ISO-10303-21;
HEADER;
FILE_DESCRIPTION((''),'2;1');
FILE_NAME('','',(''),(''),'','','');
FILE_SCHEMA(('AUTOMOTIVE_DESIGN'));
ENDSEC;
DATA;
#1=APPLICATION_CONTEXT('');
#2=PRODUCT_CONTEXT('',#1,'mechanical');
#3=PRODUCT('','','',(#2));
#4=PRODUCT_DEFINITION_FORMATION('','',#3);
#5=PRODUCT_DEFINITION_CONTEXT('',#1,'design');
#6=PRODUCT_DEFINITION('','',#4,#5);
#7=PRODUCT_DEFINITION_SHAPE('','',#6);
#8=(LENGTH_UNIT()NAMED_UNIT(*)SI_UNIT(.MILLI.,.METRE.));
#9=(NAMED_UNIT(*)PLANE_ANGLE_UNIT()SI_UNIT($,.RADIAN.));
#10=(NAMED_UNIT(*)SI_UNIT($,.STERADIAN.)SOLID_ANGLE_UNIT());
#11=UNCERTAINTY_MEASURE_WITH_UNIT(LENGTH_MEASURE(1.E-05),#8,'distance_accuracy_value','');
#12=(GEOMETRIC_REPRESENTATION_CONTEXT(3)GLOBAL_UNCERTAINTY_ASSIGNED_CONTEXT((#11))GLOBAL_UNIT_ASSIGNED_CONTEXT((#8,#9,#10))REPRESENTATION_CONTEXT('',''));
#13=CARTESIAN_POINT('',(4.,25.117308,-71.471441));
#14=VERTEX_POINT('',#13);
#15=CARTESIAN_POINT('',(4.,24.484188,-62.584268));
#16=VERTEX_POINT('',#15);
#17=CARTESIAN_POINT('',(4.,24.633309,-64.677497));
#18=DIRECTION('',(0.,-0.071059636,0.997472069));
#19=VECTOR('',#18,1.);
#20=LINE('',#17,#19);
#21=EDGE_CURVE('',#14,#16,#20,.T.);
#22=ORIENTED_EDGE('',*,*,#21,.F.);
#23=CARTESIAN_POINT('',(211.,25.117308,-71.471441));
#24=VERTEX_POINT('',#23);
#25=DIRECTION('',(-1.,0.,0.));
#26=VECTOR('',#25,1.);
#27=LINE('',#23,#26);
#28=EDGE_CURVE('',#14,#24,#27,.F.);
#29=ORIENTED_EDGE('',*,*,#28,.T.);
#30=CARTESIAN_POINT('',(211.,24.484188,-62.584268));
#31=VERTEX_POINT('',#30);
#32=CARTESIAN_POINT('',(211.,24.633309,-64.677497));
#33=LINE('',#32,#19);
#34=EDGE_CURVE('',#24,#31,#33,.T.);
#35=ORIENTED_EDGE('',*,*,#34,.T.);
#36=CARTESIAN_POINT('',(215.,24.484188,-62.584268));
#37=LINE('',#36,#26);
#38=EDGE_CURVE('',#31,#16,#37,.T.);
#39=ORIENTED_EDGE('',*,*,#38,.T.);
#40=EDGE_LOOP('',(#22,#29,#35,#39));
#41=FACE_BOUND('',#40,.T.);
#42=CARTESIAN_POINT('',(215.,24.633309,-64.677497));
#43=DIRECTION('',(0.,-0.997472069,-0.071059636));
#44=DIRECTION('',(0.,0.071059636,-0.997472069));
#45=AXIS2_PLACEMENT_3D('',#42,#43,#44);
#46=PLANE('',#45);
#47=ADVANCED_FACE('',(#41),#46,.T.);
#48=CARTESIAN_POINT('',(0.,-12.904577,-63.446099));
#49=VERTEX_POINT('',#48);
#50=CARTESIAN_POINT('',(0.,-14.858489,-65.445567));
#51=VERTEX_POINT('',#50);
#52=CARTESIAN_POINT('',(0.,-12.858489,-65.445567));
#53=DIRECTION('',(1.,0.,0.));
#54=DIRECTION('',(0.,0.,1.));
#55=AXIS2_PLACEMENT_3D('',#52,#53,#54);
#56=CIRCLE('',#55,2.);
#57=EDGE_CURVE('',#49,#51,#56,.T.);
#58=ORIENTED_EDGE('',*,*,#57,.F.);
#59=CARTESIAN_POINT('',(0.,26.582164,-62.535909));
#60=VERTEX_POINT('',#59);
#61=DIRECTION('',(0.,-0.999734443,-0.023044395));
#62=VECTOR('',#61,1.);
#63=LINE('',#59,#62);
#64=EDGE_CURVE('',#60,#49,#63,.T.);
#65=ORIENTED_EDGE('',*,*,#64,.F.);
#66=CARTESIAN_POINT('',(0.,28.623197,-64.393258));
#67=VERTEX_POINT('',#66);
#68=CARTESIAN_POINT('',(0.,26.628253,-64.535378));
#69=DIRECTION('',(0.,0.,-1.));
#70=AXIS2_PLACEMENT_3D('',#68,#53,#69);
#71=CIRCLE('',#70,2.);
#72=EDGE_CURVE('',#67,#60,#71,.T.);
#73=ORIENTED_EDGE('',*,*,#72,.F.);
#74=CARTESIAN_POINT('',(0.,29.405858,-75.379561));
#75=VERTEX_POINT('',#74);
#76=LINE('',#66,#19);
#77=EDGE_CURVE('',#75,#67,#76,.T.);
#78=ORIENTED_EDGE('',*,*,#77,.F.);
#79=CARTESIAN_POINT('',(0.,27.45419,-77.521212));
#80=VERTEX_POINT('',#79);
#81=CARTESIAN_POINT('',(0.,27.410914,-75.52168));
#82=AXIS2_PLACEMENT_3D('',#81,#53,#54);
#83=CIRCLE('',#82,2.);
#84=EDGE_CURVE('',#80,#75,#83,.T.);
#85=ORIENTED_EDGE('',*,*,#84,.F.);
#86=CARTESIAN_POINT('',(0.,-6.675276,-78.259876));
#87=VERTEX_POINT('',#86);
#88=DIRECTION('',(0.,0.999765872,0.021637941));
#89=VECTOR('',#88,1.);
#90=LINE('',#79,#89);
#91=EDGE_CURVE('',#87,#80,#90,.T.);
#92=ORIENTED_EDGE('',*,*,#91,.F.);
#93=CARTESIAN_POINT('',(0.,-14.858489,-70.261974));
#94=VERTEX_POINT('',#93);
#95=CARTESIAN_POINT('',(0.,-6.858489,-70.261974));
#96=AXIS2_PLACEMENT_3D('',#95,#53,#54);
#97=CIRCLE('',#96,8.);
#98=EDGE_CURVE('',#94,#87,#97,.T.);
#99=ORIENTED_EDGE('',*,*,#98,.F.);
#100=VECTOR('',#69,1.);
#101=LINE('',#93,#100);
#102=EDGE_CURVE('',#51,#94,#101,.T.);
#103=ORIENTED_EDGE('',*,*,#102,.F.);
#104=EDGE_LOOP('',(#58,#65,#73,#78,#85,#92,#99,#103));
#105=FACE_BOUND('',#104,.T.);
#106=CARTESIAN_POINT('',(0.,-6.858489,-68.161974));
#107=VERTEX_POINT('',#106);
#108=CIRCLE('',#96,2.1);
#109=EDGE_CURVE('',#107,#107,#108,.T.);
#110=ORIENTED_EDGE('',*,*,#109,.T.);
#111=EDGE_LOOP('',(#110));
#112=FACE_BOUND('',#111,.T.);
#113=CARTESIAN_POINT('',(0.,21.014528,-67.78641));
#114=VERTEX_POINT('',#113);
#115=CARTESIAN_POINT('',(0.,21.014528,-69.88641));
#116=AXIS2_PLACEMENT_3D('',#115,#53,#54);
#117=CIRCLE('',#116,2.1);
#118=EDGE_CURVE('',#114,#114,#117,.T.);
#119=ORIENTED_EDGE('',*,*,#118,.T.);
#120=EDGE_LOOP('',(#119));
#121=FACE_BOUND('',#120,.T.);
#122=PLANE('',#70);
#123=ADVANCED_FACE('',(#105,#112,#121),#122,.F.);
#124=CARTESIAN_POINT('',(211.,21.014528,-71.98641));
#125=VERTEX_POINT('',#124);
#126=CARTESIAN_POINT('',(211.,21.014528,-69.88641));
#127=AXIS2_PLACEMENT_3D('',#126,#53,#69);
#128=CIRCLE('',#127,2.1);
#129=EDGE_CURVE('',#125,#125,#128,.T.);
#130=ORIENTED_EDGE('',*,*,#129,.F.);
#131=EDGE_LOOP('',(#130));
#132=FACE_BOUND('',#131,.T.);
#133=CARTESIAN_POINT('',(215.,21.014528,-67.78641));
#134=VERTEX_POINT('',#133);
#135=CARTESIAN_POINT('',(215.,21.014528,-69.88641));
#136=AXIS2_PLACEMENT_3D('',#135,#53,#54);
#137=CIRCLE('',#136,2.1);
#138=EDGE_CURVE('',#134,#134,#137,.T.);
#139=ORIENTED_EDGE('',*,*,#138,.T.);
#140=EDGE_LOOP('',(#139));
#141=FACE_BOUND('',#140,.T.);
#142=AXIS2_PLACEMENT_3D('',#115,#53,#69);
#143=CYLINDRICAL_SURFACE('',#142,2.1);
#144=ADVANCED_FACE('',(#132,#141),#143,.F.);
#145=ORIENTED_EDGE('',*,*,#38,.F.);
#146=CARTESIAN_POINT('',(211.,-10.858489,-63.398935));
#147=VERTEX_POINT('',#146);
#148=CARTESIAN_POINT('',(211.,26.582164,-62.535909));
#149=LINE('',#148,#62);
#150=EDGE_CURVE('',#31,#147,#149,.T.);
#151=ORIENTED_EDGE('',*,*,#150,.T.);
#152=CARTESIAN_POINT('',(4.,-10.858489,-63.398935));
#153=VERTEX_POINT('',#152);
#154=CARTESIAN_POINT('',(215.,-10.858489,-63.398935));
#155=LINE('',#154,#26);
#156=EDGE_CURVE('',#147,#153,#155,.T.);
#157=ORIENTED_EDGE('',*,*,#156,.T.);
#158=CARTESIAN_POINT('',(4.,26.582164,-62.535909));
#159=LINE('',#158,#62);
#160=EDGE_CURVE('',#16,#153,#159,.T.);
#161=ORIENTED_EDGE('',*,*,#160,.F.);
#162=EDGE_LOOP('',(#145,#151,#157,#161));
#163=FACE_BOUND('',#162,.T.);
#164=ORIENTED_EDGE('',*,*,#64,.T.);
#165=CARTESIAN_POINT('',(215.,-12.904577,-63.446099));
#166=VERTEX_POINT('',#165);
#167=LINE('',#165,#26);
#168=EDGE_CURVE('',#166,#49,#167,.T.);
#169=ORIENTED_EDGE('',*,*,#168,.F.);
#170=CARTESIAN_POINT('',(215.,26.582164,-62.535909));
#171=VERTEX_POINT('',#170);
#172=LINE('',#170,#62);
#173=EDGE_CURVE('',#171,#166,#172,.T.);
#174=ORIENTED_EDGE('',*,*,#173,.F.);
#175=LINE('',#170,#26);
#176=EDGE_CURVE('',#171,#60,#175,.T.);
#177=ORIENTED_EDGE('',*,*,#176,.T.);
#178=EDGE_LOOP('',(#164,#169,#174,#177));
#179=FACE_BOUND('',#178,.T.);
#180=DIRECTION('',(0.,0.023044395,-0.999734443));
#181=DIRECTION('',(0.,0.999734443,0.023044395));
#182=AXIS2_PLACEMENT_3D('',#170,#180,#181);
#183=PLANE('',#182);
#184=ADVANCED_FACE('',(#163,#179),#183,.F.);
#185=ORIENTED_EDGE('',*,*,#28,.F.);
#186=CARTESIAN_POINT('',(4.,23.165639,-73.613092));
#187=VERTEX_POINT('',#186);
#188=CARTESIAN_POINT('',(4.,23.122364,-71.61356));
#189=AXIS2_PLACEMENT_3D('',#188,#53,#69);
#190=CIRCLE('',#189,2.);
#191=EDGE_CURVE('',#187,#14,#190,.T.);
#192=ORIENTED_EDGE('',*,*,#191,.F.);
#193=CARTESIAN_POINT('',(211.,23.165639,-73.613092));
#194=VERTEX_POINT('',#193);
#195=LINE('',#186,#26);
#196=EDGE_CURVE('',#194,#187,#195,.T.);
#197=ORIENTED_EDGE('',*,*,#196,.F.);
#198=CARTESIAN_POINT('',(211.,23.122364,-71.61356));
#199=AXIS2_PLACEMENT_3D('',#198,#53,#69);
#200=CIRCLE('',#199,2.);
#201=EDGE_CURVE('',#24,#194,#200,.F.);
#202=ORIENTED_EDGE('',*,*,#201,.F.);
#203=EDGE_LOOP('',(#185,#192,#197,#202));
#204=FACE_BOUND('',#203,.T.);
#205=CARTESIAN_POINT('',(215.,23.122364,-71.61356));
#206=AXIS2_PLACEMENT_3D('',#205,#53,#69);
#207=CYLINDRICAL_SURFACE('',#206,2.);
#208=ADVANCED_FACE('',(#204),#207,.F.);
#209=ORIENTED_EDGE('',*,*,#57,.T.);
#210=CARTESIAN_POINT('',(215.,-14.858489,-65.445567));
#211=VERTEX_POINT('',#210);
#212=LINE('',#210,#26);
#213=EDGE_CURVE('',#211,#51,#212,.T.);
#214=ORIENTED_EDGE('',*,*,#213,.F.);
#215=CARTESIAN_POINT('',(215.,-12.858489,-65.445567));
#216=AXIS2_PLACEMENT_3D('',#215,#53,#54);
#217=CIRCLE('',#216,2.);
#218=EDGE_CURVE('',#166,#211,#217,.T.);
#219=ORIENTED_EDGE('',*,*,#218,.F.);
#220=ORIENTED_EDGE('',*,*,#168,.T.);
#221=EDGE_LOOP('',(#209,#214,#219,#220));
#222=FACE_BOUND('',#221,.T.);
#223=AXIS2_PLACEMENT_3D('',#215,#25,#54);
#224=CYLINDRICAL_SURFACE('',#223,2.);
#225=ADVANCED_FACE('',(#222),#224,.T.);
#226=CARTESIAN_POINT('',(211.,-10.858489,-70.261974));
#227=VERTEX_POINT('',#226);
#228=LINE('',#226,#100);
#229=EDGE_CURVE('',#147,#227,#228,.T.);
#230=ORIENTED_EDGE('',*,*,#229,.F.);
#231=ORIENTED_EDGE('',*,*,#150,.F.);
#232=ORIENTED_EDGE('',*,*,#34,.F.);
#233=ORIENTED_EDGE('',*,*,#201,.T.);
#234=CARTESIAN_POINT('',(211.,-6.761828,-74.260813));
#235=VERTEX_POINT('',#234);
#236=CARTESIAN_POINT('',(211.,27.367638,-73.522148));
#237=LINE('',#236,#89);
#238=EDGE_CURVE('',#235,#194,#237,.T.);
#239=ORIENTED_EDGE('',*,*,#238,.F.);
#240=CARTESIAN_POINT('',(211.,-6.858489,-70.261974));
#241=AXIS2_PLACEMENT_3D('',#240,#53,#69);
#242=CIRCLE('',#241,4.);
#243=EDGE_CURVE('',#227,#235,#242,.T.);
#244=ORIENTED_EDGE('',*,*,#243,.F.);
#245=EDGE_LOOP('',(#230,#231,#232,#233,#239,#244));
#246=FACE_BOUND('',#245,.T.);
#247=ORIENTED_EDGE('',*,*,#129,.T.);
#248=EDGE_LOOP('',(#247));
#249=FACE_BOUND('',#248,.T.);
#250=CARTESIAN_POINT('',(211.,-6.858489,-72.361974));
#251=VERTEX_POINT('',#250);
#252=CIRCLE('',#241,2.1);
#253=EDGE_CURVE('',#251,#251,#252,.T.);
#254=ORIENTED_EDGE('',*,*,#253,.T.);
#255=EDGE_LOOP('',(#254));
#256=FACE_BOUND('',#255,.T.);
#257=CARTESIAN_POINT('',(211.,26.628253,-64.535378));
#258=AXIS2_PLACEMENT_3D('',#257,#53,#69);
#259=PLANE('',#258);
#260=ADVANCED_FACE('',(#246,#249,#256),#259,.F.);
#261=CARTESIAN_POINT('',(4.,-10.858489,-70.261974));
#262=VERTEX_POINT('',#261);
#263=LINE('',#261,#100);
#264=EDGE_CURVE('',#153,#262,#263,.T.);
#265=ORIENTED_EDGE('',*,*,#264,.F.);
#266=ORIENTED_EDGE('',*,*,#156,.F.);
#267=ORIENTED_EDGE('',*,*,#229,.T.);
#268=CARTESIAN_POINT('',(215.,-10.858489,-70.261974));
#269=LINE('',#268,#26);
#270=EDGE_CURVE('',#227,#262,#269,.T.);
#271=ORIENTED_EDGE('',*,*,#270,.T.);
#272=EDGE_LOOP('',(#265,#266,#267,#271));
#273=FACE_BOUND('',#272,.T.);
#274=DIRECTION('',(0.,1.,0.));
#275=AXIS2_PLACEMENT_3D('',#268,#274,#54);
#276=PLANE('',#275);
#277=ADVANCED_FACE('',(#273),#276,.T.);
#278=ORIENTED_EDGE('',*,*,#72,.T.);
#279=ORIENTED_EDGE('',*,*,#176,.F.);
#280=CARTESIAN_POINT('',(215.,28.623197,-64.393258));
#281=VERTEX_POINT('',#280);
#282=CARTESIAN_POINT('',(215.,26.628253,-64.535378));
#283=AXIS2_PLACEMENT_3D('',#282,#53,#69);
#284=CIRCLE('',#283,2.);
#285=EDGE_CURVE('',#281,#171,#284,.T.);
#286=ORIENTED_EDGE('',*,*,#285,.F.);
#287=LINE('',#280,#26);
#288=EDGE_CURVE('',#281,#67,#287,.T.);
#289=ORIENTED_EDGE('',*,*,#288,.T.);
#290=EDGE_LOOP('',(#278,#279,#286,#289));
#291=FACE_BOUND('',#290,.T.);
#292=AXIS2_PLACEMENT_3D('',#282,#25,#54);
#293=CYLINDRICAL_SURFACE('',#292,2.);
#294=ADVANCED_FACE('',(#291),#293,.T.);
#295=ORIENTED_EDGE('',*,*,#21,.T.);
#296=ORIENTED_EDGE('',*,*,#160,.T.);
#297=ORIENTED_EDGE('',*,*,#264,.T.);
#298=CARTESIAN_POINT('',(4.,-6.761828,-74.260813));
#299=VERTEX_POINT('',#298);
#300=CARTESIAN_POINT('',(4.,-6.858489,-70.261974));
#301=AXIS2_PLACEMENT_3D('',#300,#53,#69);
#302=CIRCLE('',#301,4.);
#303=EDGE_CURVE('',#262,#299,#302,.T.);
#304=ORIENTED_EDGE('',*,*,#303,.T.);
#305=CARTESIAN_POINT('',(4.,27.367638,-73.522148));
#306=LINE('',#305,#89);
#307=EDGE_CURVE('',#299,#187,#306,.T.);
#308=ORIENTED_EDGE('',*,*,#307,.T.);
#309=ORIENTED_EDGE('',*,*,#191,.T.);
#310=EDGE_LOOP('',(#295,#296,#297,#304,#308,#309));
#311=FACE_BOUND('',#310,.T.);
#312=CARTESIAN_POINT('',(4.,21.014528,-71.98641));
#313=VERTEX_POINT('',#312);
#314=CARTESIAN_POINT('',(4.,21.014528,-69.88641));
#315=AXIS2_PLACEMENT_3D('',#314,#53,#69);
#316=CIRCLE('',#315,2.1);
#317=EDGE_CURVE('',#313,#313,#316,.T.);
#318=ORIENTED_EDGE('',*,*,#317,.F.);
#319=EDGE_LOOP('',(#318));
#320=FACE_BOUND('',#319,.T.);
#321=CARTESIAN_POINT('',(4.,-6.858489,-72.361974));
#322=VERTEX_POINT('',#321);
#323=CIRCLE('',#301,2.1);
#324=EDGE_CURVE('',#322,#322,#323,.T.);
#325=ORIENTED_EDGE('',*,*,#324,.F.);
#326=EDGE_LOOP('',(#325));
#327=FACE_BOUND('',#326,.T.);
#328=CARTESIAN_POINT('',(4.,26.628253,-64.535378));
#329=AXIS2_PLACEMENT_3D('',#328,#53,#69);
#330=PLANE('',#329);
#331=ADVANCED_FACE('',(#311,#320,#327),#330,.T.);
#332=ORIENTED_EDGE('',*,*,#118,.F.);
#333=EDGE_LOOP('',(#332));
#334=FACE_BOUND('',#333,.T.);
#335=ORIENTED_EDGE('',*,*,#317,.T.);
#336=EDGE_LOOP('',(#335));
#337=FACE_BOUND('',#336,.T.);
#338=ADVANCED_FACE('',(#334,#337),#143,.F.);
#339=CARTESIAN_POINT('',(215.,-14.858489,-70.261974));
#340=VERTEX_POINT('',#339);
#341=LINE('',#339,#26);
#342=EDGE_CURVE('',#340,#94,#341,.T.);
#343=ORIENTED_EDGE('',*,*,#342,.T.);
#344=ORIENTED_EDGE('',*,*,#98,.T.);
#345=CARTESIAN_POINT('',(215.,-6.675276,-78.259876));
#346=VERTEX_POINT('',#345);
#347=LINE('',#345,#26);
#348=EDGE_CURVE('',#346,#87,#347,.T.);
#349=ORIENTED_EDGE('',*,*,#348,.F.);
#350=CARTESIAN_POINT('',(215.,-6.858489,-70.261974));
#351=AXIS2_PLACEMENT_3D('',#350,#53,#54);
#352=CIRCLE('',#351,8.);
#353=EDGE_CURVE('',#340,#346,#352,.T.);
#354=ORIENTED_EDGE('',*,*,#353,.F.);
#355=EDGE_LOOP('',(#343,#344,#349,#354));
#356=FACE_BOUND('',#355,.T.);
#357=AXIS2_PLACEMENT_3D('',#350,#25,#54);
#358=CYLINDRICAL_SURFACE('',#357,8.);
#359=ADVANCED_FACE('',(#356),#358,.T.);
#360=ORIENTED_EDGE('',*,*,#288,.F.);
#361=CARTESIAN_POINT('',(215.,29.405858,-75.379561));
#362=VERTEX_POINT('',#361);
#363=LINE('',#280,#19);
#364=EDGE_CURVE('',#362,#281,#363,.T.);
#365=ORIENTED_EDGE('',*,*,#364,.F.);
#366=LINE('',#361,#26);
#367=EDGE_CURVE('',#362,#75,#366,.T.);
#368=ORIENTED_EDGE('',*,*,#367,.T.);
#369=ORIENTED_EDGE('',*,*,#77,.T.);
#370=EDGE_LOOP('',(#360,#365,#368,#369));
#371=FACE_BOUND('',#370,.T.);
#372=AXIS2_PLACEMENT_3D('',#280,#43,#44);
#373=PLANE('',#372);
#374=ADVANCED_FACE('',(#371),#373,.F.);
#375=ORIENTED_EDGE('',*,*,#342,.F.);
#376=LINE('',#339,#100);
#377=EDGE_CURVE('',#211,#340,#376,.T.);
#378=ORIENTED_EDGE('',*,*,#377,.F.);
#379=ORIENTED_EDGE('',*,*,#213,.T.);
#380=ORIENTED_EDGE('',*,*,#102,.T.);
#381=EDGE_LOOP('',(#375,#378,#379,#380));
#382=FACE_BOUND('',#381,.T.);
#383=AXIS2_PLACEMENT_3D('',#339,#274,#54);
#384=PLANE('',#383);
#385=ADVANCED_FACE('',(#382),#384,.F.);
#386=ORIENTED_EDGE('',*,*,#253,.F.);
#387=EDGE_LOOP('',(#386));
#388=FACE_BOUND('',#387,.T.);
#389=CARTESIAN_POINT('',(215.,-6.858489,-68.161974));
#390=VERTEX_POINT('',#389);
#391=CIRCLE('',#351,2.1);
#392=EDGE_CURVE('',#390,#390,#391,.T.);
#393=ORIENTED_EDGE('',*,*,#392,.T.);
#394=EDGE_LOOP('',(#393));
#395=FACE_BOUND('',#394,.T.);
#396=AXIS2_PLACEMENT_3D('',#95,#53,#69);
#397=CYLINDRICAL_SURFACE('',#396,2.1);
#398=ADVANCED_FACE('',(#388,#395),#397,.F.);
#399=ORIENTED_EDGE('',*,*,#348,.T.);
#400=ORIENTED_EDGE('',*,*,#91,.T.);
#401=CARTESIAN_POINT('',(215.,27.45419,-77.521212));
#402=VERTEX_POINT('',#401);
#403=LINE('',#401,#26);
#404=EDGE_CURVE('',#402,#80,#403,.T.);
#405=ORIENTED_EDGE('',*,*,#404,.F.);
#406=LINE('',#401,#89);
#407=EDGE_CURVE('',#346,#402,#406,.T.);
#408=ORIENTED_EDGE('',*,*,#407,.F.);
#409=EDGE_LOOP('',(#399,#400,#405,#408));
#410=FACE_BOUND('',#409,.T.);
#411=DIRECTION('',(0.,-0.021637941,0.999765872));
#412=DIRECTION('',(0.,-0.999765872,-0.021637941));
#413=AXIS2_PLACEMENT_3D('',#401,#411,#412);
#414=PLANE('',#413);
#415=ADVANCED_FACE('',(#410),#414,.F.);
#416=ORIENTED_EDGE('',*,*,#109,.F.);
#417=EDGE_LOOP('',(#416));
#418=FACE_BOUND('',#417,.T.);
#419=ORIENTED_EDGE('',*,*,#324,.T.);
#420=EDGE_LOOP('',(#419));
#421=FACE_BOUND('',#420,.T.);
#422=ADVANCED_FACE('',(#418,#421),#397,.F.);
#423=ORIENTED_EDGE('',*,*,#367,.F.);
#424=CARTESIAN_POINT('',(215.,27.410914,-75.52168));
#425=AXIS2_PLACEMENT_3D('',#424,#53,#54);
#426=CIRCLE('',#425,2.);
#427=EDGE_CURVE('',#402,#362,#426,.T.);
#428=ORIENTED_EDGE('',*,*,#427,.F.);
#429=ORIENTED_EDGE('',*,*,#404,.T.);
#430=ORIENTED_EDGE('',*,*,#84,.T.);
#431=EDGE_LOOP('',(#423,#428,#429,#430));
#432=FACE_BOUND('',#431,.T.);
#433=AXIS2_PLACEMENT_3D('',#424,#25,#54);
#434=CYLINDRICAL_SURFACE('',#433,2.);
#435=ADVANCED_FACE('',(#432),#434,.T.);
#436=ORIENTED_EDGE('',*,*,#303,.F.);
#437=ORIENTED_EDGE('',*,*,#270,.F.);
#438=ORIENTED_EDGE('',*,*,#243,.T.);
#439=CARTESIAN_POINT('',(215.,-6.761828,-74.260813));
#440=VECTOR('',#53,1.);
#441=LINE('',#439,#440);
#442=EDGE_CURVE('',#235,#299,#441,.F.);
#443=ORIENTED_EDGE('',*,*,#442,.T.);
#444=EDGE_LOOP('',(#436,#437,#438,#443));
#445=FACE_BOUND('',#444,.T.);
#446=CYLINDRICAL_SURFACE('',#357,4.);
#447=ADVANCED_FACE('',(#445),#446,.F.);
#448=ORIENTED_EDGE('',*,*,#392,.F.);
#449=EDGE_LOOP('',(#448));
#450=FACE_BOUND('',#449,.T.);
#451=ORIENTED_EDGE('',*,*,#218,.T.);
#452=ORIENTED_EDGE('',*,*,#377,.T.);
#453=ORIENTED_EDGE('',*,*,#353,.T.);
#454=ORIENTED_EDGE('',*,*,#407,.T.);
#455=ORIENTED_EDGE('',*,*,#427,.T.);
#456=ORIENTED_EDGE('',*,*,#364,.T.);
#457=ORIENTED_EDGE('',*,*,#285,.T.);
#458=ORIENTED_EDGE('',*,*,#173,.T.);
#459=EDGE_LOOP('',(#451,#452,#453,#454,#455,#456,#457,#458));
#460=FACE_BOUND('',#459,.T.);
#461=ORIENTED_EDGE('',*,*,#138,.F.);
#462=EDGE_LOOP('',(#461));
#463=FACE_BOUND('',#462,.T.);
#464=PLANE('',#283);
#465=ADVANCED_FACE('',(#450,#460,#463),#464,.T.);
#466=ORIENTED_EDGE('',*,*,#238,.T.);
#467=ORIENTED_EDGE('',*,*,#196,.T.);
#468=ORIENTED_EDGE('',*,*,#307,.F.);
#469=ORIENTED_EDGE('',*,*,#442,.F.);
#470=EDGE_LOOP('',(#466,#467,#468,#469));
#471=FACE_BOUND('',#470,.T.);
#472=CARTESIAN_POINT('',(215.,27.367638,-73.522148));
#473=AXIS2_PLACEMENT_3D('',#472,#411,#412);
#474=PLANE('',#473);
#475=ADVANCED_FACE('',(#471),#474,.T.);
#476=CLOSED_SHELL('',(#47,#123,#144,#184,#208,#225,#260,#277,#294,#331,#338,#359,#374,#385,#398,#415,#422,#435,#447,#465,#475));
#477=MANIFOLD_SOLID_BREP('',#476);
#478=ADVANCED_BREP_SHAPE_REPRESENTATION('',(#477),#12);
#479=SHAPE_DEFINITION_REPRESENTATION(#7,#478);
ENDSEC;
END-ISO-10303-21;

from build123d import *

# Parameters (mm, degrees)
BOSS_EXTRUDE1_DEPTH = 215
SHELL1_START        = 4
SHELL1_DEPTH        = 207
SKETCH3_R           = 2.1
CUT_EXTRUDE1_DEPTH  = 231.683632934
FILLET1_R           = 2


# Read off the part's stored shape, not the designer's step: Shell1
with BuildPart() as part:
    # Sketch1 → Boss-Extrude1 (new body)
    with BuildSketch(Plane(origin=(0, 0, 0), x_dir=(0, 0, -1), z_dir=(1, 0, 0))):
        with BuildLine():
            Line((70.261974321, -14.858488677), (65.445567386, -14.858488677))
            ThreePointArc((65.445567386, -14.858488677), (64.047743646, -14.288904278), (63.446098501, -12.904577468))
            Line((63.446098501, -12.904577468), (62.535908701, 26.582164322))
            ThreePointArc((62.535908701, 26.582164322), (63.05617043, 27.974338618), (64.393258315, 28.623197251))
            Line((64.393258315, 28.623197251), (75.379560776, 29.405858418))
            ThreePointArc((75.379560776, 29.405858418), (76.868805698, 28.889174231), (77.521211792, 27.454190163))
            Line((77.521211792, 27.454190163), (78.259876122, -6.675276303))
            ThreePointArc((78.259876122, -6.675276303), (75.98323725, -12.450192398), (70.261974321, -14.858488677))
        make_face()
    extrude(amount=BOSS_EXTRUDE1_DEPTH)

    # Shell1 outline → Shell1 (cut)
    with BuildSketch(Plane.YZ.offset(SHELL1_START)):
        with BuildLine():
            Line((-10.858488677, -63.398935097), (-10.858488677, -70.261974321))
            ThreePointArc((-10.858488677, -70.261974321), (-9.652532179, -73.124372077), (-6.761828222, -74.260806245))
            Line((-6.761828222, -74.260806245), (25.266638922, -73.567620252))
            Line((25.266638922, -73.567620252), (24.484187937, -62.584268141))
            Line((24.484187937, -62.584268141), (-10.858488677, -63.398935097))
        make_face()
    extrude(amount=SHELL1_DEPTH, mode=Mode.SUBTRACT)

    # Sketch3 → Cut-Extrude1 (cut, through all)
    with BuildSketch(Plane(origin=(215, 0, 0), x_dir=(0, 0, -1), z_dir=(1, 0, 0))):
        with Locations((70.261974321, -6.858488677)):
            Circle(SKETCH3_R)
        with Locations((69.886409545, 21.014527834)):
            Circle(SKETCH3_R)
    extrude(amount=-CUT_EXTRUDE1_DEPTH, mode=Mode.SUBTRACT)

    # Fillet1
    fillet1_edges = [part.edges().sort_by_distance(p)[0] for p in [
        (107.5, 25.266638922, -73.567620252),
    ]]
    fillet(fillet1_edges, radius=FILLET1_R)


solid = part.part
